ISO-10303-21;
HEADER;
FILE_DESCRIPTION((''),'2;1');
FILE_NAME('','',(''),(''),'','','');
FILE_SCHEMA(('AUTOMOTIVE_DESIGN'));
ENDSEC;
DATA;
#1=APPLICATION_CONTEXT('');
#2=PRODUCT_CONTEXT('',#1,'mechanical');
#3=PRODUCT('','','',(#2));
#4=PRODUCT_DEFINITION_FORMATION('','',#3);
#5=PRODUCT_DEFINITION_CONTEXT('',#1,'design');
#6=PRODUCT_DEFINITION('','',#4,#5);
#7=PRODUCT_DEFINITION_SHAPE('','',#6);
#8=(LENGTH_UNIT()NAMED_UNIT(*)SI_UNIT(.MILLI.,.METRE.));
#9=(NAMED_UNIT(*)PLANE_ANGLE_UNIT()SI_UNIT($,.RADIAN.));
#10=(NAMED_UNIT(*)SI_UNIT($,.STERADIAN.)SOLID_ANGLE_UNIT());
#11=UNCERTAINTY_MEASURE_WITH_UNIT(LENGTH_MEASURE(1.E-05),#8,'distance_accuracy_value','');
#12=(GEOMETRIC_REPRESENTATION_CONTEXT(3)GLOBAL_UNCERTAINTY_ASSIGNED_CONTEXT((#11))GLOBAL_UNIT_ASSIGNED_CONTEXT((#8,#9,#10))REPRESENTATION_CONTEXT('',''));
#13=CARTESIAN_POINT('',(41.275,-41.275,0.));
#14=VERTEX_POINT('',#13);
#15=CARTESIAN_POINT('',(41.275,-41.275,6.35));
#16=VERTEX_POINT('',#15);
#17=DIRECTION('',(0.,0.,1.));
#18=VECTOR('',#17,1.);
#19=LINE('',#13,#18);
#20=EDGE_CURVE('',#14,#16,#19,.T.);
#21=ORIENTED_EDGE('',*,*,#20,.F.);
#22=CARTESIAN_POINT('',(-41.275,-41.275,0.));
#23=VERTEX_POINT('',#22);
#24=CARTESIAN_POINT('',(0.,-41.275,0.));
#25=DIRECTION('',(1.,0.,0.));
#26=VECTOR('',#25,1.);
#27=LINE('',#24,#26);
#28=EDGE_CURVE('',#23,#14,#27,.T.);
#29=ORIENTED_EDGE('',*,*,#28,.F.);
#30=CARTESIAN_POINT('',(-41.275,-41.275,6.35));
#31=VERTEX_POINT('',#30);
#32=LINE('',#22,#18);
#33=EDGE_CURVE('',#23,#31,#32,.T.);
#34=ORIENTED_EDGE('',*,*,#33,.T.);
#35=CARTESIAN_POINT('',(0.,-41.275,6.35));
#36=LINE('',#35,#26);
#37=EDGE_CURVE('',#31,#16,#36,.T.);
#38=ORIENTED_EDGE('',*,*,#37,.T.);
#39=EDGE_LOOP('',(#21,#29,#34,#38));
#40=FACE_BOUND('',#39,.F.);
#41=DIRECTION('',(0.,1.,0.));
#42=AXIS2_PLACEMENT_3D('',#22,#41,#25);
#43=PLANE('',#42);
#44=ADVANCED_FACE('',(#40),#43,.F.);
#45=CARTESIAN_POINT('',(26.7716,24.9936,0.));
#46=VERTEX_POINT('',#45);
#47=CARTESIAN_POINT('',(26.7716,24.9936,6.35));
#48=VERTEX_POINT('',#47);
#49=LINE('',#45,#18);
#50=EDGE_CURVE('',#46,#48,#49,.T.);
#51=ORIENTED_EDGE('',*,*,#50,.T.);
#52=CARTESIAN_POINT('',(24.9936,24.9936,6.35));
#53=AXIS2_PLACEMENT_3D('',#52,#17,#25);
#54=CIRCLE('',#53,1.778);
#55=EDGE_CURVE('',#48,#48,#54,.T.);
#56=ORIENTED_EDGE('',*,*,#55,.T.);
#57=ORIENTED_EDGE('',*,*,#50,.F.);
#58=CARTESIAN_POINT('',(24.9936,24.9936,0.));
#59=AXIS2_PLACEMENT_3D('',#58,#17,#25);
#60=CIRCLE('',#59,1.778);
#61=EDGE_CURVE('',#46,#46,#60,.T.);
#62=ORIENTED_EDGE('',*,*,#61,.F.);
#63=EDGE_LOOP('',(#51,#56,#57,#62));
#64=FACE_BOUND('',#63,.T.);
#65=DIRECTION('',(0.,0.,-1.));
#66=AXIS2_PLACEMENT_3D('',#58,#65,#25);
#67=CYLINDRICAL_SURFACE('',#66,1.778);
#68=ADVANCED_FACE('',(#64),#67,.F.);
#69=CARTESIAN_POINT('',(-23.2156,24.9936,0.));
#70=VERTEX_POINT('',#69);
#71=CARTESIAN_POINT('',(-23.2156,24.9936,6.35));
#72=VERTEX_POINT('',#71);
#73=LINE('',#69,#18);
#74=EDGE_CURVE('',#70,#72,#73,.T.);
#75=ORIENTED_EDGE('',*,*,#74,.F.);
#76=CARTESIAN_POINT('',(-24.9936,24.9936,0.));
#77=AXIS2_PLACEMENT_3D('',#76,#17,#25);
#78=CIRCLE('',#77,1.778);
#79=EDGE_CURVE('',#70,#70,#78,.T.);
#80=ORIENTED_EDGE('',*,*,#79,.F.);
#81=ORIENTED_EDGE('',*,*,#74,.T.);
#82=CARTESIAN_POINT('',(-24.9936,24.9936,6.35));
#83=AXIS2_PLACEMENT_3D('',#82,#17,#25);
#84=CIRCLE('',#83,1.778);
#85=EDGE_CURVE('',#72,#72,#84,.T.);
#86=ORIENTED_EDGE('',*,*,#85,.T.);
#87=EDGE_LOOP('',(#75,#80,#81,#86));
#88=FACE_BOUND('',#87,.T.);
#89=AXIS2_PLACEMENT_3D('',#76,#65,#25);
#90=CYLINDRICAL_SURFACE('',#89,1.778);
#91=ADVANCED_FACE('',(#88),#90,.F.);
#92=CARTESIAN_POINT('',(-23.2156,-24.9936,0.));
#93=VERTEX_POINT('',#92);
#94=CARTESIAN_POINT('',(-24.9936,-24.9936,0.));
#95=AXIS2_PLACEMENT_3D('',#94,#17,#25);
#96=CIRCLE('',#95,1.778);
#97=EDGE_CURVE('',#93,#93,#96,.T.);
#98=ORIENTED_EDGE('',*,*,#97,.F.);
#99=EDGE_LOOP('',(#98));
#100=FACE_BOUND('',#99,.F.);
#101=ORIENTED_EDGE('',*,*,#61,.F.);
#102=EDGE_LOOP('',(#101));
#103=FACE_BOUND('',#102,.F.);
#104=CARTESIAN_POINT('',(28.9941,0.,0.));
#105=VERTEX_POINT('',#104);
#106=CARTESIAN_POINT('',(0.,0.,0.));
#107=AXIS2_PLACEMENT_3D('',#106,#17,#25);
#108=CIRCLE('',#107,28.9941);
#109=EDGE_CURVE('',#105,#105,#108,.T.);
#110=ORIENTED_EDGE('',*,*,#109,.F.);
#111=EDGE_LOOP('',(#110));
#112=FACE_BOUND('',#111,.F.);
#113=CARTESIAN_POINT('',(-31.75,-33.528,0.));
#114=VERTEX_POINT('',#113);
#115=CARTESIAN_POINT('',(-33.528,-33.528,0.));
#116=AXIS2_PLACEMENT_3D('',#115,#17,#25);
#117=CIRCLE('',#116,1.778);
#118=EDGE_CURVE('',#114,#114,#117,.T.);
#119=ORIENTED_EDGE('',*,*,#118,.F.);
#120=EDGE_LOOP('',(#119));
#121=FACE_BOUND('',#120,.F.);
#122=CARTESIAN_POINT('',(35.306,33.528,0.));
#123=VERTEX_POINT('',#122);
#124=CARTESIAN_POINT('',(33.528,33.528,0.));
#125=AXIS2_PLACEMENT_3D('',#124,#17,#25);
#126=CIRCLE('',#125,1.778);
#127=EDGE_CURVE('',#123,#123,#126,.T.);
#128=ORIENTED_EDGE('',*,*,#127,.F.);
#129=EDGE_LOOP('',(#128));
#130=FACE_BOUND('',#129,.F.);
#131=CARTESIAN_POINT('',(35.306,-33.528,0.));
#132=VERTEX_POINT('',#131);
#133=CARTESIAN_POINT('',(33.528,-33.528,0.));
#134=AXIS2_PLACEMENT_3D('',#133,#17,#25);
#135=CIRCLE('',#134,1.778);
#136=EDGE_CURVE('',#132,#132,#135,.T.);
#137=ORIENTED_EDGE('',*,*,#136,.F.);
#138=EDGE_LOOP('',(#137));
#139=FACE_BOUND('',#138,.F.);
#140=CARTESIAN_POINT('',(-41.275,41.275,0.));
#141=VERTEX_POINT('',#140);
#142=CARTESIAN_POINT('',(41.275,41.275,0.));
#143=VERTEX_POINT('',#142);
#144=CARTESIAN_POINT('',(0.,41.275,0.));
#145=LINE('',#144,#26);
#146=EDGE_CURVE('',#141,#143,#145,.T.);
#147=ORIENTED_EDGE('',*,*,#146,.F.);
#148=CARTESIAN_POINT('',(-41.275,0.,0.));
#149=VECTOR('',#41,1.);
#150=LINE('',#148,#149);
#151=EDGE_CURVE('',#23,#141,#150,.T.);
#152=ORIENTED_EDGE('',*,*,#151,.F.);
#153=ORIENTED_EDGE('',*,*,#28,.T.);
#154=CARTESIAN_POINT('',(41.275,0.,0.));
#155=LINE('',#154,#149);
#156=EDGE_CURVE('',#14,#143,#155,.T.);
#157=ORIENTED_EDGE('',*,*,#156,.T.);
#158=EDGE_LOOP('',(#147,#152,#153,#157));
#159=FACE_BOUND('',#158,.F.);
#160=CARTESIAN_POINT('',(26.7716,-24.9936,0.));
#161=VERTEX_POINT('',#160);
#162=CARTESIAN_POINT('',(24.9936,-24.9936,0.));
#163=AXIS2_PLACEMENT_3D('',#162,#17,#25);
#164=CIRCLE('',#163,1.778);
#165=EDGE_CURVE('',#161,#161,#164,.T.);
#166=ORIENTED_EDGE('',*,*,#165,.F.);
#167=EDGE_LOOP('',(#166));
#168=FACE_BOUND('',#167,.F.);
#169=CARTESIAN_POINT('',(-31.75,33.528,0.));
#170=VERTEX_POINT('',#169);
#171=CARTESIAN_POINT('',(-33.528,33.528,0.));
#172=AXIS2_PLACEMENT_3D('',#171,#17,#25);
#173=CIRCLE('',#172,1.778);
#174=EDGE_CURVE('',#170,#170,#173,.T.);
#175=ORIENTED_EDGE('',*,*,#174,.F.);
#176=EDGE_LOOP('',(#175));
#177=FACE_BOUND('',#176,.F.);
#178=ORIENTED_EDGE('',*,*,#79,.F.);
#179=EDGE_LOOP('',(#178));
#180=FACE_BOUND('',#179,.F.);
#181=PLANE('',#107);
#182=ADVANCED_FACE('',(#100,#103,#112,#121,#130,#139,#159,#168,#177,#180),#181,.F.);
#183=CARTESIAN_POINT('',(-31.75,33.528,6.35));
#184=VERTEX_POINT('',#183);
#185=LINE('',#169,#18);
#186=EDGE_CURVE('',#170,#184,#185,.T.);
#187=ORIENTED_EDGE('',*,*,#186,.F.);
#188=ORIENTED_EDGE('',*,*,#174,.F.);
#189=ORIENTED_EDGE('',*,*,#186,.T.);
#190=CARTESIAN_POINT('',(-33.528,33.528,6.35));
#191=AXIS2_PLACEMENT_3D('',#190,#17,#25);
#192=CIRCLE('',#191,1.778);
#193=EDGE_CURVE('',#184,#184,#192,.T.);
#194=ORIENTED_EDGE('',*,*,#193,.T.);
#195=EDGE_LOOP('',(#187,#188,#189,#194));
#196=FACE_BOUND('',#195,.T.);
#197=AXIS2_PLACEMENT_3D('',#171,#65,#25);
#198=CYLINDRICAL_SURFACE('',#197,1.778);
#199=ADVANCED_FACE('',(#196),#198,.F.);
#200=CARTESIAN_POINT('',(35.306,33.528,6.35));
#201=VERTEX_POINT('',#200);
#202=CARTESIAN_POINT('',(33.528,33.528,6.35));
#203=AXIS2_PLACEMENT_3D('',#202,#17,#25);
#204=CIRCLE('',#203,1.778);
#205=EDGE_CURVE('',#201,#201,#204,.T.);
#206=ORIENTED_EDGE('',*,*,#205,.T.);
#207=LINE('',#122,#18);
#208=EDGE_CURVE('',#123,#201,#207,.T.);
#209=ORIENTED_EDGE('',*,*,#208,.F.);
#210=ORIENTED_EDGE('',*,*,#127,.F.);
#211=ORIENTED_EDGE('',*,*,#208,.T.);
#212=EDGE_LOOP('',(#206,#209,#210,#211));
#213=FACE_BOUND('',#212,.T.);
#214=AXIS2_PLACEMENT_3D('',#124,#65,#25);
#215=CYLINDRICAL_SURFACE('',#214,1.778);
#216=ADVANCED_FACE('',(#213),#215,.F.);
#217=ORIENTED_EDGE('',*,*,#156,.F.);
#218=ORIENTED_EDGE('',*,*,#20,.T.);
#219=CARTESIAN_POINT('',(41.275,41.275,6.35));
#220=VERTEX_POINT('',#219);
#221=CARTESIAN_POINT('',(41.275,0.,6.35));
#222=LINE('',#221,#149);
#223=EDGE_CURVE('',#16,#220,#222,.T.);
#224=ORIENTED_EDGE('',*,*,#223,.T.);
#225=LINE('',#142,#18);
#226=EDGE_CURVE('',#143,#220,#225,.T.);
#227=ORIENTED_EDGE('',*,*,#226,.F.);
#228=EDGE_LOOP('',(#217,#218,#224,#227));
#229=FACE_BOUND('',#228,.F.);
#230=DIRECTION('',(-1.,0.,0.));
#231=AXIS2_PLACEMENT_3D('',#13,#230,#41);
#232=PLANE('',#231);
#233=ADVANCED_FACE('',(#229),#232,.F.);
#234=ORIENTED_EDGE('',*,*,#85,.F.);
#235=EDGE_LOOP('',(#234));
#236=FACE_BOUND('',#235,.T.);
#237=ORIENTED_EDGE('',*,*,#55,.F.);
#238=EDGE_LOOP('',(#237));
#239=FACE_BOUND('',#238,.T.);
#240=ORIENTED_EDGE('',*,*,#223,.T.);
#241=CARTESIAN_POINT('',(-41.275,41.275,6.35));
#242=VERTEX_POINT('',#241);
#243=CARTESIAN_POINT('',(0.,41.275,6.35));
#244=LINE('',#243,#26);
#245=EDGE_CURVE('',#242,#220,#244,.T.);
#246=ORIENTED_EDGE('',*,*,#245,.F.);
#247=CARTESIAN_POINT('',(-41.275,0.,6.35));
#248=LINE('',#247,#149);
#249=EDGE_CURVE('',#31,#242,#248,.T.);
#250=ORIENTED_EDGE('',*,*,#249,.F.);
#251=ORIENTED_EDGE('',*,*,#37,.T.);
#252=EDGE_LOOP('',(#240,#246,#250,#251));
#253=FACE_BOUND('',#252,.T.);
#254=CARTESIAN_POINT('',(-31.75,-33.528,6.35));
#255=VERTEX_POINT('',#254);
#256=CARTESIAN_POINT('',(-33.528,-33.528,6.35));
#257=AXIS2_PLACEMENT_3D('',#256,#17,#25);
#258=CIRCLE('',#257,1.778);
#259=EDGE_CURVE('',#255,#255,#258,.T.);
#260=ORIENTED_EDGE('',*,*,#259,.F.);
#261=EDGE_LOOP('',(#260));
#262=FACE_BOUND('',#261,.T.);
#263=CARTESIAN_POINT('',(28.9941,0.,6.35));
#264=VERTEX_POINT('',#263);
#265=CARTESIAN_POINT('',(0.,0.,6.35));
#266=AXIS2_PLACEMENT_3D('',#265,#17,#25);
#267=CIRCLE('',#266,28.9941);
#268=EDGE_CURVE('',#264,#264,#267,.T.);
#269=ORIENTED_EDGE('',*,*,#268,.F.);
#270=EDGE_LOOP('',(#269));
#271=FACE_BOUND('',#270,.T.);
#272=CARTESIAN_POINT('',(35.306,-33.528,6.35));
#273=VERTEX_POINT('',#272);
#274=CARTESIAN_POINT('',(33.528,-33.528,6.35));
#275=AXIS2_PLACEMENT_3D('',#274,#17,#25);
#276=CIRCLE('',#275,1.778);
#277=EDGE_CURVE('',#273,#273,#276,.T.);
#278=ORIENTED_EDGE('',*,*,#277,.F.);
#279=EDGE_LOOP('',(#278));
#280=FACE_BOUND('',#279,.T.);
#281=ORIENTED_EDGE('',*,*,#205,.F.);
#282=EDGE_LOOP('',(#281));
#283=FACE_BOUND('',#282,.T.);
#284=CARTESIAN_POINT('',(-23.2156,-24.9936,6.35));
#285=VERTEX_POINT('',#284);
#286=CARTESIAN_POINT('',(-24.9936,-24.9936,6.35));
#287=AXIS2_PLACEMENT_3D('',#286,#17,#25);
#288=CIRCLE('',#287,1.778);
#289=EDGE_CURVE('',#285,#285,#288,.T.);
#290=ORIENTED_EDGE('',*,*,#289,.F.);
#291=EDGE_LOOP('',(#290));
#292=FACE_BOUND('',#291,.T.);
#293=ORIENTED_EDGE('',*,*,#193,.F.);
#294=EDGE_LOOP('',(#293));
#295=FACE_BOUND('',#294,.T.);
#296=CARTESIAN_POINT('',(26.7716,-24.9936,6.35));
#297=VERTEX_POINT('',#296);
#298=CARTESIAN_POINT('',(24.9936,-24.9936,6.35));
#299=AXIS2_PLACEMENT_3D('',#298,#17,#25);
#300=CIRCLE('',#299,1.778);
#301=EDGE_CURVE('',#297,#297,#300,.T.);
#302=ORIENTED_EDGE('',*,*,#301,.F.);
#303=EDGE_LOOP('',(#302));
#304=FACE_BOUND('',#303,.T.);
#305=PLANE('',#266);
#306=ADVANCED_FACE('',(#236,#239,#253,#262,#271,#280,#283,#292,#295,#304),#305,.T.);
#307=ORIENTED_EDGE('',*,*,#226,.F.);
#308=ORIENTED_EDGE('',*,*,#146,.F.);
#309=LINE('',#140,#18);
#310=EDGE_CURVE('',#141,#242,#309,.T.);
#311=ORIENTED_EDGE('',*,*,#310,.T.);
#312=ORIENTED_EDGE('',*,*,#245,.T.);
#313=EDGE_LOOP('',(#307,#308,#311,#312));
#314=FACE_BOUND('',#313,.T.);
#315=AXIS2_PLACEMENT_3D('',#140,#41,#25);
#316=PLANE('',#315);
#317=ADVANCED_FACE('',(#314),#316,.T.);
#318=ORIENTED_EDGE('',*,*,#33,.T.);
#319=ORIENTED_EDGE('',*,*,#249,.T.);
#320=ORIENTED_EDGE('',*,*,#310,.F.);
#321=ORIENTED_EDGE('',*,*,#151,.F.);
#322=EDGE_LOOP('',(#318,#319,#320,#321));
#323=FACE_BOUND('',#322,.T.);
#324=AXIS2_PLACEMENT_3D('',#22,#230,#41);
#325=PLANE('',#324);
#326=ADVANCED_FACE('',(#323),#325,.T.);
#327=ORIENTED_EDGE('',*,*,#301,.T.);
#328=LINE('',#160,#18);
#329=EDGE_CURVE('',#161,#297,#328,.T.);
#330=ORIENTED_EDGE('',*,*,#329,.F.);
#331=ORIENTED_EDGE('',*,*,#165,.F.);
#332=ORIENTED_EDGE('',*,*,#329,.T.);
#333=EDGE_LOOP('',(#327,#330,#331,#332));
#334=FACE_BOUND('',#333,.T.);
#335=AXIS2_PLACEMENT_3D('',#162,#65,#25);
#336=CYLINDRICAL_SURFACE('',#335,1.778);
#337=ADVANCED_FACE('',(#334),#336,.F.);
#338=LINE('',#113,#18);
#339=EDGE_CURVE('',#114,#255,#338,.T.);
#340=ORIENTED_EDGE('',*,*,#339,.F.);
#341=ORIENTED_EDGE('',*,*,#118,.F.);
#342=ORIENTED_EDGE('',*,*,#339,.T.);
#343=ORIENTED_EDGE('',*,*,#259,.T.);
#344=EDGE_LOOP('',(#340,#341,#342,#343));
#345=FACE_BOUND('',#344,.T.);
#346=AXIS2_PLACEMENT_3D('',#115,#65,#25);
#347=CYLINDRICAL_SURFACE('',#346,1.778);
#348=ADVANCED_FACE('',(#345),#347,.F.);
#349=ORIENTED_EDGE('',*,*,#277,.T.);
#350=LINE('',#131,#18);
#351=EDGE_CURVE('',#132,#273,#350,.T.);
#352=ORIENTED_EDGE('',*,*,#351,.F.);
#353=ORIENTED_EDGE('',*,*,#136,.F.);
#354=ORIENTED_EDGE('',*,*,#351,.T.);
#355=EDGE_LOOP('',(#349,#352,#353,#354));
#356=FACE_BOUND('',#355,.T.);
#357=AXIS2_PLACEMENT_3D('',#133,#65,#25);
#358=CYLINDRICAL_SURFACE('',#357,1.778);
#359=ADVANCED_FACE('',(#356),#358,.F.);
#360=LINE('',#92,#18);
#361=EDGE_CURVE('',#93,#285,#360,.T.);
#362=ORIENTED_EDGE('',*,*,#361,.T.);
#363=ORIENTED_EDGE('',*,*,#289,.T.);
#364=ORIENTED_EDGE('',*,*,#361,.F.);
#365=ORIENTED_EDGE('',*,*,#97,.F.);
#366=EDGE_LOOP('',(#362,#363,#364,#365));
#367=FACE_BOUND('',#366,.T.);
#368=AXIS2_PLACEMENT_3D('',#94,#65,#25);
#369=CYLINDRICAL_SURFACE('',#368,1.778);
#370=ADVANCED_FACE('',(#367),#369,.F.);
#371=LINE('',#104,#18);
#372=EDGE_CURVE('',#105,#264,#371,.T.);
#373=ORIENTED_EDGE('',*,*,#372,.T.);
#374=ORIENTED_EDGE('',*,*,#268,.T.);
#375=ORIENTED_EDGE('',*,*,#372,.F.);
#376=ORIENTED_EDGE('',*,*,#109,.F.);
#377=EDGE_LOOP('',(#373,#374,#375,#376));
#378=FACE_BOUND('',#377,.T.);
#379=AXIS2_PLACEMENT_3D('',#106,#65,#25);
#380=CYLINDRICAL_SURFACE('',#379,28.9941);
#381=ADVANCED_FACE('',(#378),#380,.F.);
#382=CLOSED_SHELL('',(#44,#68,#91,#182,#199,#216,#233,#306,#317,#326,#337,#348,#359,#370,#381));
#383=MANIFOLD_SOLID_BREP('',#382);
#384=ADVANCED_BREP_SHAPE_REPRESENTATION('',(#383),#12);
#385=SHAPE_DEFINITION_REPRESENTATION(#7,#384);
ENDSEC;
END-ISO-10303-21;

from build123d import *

# Parameters (mm, degrees)
F0_W     = 82.55
F0_H     = 82.55
F0_R     = 1.778
F0_R_2   = 28.9941
F1_DEPTH = 6.35


# Not quite as in the source:
# - a length typed as a fraction of an inch, garbled in the dataset ("3 / 203.2 mm" for 3/8 in), is restored


with BuildPart() as f1:
    # F0 (on Top) → F1 (new body)
    with BuildSketch(Plane.XY):
        Rectangle(F0_W, F0_H)
        with Locations((-33.528, -33.528)):
            Circle(F0_R, mode=Mode.SUBTRACT)
        with Locations((-24.9936, -24.9936)):
            Circle(F0_R, mode=Mode.SUBTRACT)
        with Locations((33.528, -33.528)):
            Circle(F0_R, mode=Mode.SUBTRACT)
        with Locations((24.9936, -24.9936)):
            Circle(F0_R, mode=Mode.SUBTRACT)
        with Locations((-24.9936, 24.9936)):
            Circle(F0_R, mode=Mode.SUBTRACT)
        with Locations((-33.528, 33.528)):
            Circle(F0_R, mode=Mode.SUBTRACT)
        Circle(F0_R_2, mode=Mode.SUBTRACT)
        with Locations((24.9936, 24.9936)):
            Circle(F0_R, mode=Mode.SUBTRACT)
        with Locations((33.528, 33.528)):
            Circle(F0_R, mode=Mode.SUBTRACT)
    extrude(amount=F1_DEPTH)


solid = f1.part
